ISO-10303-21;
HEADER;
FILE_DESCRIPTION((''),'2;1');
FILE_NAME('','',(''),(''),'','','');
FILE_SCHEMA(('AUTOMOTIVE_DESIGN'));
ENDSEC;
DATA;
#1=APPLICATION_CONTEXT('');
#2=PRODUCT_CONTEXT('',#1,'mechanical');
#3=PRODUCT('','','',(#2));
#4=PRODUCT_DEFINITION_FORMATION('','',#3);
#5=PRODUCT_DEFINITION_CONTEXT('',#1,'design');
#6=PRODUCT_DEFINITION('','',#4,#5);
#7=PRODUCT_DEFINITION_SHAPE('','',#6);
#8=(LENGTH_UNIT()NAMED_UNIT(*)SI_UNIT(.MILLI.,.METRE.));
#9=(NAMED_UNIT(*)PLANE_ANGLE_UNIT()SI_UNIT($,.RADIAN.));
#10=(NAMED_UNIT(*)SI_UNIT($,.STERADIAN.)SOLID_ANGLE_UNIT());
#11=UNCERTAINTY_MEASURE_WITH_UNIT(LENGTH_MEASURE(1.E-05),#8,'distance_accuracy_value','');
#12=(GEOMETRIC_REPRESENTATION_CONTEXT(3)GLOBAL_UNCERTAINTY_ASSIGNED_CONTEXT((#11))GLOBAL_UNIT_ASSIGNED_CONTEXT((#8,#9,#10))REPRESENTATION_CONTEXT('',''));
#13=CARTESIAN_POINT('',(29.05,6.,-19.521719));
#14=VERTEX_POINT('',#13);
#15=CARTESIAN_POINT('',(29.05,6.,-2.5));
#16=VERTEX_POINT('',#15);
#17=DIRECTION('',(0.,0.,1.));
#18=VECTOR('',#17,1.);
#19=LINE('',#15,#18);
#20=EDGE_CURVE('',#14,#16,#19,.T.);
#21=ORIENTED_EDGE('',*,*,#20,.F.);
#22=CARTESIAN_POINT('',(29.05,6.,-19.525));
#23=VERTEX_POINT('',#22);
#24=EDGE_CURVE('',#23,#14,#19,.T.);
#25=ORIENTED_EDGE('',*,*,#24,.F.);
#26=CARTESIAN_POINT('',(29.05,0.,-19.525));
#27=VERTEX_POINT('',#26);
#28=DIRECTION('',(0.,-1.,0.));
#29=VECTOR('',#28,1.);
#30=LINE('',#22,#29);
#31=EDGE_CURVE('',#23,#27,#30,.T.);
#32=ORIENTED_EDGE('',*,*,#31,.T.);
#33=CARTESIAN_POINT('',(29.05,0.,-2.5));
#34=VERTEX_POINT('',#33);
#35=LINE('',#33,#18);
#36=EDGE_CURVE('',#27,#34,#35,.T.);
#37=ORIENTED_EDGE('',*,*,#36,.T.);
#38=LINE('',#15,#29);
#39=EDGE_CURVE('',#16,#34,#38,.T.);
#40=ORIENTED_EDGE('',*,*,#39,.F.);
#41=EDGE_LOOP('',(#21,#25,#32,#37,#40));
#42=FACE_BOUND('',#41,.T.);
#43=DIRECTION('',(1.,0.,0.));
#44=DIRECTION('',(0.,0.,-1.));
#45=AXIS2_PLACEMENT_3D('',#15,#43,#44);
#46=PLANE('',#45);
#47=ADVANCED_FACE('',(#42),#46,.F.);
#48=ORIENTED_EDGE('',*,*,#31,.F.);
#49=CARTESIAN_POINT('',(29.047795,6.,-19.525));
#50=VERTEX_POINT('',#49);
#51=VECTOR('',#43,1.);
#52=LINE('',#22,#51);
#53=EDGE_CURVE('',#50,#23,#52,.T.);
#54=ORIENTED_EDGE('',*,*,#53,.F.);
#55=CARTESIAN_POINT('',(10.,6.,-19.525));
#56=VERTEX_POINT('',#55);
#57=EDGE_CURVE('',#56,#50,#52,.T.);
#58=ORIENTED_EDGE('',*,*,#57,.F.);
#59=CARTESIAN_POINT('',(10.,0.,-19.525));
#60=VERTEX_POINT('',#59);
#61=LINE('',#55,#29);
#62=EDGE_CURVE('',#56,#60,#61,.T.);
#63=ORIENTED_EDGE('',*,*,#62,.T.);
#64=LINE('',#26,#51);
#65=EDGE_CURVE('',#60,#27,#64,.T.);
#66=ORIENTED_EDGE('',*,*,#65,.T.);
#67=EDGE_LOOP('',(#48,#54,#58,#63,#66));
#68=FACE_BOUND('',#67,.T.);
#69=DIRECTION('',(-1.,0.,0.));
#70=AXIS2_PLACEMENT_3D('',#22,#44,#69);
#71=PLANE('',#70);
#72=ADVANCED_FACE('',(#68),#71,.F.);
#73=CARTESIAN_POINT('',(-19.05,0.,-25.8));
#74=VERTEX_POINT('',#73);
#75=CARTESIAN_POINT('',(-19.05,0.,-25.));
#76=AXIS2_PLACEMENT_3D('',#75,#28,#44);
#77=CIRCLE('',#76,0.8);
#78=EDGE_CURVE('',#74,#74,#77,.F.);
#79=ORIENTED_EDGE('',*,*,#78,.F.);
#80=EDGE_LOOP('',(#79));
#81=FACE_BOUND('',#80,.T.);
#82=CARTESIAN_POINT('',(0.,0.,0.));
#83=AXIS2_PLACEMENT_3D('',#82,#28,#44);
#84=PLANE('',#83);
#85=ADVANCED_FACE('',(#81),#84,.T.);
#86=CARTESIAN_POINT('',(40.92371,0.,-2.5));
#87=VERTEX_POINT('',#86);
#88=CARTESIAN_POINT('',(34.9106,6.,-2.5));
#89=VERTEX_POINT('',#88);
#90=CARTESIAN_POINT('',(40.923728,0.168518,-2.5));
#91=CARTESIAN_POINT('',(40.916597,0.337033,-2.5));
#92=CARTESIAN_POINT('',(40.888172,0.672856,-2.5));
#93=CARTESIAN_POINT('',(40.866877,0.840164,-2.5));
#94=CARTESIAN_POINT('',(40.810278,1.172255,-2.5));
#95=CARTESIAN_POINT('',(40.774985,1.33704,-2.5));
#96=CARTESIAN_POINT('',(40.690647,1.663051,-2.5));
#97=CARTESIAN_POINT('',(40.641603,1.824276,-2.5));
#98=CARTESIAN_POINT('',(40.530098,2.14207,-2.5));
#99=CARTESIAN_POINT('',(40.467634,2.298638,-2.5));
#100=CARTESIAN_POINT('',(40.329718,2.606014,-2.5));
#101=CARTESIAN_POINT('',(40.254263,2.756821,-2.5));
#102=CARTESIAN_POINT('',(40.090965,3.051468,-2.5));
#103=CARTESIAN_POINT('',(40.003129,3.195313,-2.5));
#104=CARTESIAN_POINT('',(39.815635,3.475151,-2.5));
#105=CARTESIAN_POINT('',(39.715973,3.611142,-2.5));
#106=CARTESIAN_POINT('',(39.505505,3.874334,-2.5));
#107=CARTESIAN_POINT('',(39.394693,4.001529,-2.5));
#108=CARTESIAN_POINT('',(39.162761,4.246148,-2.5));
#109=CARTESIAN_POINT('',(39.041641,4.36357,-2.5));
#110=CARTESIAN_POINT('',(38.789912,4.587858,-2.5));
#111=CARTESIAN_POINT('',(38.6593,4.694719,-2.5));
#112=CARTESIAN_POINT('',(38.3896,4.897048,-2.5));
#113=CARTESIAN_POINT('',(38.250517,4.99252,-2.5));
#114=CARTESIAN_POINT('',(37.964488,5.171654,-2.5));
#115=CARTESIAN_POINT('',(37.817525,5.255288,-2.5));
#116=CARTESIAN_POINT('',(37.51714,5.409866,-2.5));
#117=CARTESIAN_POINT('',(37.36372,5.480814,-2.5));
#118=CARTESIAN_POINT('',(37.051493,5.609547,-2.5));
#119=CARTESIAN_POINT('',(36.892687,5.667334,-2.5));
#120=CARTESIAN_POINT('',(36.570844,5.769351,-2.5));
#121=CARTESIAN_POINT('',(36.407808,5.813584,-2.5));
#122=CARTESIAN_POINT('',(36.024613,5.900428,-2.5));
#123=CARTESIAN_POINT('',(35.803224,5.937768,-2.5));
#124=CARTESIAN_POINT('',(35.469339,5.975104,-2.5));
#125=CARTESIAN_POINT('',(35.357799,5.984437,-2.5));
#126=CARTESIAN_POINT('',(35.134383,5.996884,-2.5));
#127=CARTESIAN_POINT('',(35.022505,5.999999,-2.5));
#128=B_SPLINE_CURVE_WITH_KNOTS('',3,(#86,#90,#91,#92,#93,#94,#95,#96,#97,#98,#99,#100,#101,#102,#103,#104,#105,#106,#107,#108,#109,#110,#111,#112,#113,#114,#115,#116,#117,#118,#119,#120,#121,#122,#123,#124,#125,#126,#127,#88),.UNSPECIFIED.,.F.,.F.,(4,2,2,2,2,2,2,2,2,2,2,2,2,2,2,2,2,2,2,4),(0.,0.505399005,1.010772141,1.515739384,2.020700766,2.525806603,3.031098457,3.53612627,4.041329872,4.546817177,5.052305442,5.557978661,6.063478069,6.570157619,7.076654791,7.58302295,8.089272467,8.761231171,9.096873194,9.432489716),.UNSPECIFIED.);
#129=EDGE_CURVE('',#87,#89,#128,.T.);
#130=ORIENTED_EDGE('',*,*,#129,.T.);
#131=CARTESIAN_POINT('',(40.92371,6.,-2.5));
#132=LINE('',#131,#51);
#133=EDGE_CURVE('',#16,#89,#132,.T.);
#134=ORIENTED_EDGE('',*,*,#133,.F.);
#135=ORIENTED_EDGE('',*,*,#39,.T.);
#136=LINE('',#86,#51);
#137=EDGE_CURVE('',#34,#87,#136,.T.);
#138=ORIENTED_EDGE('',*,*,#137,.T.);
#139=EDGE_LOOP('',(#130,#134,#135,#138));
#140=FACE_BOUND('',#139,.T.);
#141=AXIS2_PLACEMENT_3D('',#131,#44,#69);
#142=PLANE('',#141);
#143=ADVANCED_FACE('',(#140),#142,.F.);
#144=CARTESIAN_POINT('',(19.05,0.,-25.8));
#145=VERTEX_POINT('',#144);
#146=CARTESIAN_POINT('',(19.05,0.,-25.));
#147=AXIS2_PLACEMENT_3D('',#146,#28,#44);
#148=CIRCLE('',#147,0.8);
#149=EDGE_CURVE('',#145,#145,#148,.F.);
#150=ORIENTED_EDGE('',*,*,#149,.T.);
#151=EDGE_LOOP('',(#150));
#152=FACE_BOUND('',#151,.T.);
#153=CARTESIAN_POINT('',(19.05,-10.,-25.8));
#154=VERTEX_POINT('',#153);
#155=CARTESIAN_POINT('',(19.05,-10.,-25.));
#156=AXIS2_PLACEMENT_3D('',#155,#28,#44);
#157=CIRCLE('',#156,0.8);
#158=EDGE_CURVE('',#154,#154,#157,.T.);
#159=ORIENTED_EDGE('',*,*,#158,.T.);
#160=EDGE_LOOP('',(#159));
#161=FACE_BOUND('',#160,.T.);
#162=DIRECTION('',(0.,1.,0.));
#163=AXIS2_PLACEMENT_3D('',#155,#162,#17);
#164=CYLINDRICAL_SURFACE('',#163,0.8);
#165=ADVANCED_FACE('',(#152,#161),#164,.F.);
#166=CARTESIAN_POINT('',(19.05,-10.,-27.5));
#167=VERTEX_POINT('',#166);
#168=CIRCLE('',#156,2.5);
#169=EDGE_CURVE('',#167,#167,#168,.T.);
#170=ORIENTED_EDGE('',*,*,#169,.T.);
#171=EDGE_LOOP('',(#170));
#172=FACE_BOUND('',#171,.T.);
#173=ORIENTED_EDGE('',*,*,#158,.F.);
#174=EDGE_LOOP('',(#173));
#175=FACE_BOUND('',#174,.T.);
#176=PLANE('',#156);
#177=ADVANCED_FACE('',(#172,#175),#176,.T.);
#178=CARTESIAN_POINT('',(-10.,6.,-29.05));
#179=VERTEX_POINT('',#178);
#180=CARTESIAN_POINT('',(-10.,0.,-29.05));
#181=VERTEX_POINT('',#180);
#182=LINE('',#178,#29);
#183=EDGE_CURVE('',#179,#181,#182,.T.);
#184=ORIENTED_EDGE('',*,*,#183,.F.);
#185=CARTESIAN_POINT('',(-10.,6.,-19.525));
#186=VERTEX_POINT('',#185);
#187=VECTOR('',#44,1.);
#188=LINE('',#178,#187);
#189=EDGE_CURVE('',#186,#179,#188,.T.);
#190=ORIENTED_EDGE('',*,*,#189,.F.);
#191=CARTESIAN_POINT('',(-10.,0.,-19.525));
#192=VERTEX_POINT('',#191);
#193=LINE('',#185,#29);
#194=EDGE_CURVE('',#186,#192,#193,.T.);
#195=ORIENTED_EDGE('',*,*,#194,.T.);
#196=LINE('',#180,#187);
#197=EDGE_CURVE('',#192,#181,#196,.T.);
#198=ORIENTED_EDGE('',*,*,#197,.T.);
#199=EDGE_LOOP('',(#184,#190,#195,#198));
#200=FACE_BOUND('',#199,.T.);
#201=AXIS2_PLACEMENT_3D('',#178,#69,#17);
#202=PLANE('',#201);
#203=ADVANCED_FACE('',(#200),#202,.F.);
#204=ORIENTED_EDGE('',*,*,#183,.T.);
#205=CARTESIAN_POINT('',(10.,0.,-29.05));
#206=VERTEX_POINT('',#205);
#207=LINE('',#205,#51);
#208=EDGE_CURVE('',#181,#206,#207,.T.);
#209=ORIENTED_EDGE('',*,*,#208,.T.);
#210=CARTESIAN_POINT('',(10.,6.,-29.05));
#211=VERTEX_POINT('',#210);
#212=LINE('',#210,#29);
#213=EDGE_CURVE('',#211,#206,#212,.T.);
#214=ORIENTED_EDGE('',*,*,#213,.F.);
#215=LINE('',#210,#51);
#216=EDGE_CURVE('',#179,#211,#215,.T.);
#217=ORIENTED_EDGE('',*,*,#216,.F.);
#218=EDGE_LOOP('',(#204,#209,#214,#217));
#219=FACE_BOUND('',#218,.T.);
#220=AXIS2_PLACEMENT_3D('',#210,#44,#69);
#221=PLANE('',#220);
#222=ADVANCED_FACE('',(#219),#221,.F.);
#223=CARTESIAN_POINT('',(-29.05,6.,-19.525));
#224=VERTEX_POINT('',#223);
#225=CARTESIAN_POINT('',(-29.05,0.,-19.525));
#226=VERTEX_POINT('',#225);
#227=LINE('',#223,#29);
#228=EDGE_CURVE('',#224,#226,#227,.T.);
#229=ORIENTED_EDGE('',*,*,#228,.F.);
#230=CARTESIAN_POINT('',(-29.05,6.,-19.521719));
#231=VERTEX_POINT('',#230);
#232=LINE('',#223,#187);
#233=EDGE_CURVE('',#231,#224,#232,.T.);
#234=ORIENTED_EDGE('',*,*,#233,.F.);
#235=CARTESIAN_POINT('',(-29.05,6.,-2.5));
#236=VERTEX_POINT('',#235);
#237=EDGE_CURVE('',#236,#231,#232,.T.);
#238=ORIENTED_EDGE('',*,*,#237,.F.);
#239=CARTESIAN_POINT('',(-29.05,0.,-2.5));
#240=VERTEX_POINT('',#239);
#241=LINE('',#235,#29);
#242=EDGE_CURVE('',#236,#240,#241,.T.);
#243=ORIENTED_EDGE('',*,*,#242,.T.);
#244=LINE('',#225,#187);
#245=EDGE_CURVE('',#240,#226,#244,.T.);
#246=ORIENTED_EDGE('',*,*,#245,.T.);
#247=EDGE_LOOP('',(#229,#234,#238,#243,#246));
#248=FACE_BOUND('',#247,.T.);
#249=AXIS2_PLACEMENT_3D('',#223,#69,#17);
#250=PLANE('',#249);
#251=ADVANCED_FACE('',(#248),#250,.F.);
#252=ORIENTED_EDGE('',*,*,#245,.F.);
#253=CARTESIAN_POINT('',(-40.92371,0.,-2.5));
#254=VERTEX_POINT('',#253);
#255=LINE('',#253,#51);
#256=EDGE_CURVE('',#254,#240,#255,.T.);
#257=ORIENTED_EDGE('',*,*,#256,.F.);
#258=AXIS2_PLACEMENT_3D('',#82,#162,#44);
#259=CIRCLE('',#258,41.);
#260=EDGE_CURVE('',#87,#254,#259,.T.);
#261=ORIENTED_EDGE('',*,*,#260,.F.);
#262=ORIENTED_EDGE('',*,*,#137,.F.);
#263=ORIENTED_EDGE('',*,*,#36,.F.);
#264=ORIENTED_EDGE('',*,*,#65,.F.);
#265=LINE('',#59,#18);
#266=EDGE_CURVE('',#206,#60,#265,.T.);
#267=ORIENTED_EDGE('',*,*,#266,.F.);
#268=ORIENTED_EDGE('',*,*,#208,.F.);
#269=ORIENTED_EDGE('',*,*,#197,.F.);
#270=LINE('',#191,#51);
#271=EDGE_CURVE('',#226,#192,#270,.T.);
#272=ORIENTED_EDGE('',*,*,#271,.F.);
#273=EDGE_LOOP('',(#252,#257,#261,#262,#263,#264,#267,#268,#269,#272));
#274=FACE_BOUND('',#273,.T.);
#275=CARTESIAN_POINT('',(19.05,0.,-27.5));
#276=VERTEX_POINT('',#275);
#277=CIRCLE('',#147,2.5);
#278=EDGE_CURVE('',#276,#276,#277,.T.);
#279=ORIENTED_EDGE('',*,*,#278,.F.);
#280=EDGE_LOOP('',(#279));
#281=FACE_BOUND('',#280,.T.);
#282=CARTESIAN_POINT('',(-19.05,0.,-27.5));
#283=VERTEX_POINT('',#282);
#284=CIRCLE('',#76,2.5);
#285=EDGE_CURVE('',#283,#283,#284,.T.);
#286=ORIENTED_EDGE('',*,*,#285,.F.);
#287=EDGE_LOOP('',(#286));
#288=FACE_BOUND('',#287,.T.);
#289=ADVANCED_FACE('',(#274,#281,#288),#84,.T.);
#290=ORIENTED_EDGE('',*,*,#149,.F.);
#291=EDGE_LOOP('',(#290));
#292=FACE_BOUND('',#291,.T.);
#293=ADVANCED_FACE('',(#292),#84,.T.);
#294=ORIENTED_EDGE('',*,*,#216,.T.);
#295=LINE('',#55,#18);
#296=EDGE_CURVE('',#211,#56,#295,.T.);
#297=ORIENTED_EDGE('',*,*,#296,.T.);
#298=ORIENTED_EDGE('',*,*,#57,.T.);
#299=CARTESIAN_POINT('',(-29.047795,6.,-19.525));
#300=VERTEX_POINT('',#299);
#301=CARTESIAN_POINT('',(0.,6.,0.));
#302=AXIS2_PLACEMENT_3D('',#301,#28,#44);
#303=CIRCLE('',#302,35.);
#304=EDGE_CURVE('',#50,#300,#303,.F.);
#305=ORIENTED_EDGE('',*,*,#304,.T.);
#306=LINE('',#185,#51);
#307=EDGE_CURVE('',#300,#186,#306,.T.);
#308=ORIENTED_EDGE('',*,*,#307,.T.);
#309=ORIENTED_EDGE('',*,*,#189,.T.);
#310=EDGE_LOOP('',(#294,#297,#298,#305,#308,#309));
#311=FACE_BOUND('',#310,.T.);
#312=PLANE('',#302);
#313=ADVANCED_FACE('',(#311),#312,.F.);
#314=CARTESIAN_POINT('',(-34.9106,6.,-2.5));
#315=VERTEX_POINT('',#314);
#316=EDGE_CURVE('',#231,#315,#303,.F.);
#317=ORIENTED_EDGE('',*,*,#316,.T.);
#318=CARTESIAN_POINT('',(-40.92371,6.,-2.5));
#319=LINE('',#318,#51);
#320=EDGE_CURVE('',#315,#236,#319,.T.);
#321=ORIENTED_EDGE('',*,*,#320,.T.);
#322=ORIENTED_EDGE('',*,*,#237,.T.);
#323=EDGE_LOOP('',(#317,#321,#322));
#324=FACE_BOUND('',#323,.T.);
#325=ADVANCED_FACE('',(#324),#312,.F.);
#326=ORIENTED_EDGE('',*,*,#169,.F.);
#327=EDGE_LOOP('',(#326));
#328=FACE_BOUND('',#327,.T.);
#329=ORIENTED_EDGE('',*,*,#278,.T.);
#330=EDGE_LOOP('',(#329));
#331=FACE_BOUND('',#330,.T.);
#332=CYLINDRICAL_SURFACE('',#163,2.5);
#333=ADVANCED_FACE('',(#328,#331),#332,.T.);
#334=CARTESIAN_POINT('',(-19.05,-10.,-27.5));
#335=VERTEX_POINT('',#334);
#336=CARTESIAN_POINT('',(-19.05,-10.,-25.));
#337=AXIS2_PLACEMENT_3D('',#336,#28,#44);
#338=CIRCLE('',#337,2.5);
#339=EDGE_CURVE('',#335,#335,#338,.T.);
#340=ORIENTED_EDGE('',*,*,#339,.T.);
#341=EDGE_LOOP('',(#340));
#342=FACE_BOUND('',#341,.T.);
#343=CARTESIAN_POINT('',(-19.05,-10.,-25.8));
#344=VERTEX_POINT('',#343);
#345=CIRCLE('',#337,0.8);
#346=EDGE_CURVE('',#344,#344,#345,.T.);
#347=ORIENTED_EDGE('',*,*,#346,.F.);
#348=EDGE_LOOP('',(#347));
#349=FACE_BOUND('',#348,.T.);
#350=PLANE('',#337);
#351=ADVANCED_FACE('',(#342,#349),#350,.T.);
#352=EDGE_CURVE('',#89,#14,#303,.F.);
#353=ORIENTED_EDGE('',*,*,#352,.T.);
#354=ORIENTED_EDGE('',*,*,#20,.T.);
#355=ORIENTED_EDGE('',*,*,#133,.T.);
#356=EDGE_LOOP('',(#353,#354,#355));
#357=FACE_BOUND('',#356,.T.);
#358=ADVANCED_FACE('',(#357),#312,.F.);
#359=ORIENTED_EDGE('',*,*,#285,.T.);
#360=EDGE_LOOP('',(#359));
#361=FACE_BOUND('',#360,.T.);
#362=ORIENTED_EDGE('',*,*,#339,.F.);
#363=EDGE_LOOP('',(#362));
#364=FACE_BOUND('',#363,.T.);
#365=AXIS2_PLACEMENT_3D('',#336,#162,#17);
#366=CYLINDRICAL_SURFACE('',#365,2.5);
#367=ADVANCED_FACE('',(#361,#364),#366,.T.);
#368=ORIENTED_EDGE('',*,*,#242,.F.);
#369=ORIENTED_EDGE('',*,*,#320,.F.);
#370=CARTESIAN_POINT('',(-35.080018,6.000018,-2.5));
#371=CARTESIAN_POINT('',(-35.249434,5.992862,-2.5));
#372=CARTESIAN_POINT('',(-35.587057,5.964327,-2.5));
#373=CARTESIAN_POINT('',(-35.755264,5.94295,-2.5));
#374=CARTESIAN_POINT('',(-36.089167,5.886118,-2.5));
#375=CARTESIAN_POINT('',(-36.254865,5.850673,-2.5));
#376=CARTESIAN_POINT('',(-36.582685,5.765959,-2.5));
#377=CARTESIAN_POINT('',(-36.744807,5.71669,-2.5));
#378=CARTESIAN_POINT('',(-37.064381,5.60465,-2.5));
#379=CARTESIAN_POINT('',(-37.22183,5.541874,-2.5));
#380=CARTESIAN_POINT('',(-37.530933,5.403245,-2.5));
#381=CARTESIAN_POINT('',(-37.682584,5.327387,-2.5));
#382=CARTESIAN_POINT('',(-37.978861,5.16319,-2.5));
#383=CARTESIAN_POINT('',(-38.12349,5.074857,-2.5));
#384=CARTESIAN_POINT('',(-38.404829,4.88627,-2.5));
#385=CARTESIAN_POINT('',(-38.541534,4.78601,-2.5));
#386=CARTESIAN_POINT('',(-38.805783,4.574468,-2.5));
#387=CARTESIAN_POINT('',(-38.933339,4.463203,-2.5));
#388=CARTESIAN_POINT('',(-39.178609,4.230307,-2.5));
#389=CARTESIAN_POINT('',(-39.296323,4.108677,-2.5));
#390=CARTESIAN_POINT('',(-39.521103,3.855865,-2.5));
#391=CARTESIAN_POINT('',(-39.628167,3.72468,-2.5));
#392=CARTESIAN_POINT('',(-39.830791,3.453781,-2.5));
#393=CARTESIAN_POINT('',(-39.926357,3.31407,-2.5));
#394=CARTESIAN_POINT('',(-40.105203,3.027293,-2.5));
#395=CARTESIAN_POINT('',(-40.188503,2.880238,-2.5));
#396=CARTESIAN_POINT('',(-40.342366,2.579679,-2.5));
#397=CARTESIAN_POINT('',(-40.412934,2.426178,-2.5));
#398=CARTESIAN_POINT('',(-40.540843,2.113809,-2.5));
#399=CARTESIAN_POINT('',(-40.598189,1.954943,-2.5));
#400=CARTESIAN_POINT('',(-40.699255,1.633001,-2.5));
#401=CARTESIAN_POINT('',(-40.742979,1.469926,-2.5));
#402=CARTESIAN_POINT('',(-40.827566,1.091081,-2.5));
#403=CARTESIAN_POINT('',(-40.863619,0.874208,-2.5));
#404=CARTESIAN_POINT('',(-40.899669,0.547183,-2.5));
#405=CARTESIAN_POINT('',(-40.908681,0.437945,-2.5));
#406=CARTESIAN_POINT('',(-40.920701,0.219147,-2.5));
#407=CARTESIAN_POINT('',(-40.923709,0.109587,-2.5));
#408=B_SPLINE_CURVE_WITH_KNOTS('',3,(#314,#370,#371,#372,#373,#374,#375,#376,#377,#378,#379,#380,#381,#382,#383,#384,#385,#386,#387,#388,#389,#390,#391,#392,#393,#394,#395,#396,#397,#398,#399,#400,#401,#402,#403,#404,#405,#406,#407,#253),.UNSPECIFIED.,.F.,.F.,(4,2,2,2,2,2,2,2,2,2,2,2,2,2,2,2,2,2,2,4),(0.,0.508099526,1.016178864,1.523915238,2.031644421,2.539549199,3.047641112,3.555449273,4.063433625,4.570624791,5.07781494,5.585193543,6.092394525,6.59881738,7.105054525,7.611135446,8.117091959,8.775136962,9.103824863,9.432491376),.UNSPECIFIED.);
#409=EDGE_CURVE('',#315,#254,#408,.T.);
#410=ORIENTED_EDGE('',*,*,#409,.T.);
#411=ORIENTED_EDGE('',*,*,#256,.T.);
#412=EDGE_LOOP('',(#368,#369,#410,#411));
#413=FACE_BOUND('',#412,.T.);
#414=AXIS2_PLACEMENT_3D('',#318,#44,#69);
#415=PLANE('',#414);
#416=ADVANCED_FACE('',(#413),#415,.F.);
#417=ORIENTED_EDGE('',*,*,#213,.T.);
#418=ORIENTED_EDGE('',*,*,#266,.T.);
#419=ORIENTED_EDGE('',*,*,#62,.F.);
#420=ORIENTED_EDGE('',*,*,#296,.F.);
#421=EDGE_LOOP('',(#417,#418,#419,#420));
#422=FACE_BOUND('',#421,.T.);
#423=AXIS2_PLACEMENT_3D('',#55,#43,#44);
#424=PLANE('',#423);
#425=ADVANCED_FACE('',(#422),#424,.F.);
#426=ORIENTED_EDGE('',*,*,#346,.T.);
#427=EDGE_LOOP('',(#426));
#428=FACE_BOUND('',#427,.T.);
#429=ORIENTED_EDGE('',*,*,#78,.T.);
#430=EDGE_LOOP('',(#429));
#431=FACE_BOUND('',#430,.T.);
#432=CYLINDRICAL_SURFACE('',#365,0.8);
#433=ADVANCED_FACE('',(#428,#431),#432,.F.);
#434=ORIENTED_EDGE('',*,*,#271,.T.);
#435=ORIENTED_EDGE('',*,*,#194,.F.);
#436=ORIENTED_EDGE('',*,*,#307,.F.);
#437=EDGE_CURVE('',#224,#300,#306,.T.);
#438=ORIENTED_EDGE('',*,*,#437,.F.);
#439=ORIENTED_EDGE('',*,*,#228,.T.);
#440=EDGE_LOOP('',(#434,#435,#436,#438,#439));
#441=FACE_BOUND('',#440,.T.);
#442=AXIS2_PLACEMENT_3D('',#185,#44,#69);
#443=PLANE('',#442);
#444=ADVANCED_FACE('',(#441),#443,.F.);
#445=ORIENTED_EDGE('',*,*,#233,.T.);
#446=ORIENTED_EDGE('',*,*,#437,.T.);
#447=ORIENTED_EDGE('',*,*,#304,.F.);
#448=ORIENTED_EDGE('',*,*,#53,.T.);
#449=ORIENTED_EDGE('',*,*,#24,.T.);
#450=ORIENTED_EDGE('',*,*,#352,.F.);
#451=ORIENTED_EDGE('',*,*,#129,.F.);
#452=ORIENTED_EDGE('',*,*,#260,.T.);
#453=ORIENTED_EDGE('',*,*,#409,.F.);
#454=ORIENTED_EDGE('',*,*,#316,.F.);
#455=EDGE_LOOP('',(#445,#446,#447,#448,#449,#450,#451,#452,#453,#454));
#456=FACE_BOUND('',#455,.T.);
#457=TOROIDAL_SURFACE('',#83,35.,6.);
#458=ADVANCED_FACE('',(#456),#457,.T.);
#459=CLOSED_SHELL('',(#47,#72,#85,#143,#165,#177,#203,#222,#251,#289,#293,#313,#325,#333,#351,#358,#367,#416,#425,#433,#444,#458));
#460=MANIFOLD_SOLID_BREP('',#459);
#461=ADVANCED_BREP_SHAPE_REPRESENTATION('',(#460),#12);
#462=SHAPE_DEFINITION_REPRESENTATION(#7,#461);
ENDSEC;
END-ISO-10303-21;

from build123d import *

# Parameters (mm, degrees)
BOSS_EXTRUDE1_DEPTH = 6
FILLET1_R           = 6
SKETCH2_R           = 2.5
SKETCH2_R_2         = 0.8
BOSS_EXTRUDE2_DEPTH = 10


with BuildPart() as part:
    # Sketch1 → Boss-Extrude1 (new body)
    with BuildSketch(Plane(origin=(0, 0, 0), x_dir=(1, 0, 0), z_dir=(0, 1, 0))):
        with BuildLine():
            Line((-40.923709509, 2.5), (-29.05, 2.5))
            Line((-29.05, 2.5), (-29.05, 19.525))
            Line((-29.05, 19.525), (-10, 19.525))
            Line((-10, 19.525), (-10, 29.05))
            Line((-10, 29.05), (10, 29.05))
            Line((10, 29.05), (10, 19.525))
            Line((10, 19.525), (29.05, 19.525))
            Line((29.05, 19.525), (29.05, 2.5))
            Line((29.05, 2.5), (40.923709509, 2.5))
            ThreePointArc((40.923709509, 2.5), (0, 41), (-40.923709509, 2.5))
        make_face()
    extrude(amount=BOSS_EXTRUDE1_DEPTH)

    # Fillet1
    fillet1_edges = [part.edges().sort_by_distance(p)[0] for p in [
        (0, 6, -41),
    ]]
    fillet(fillet1_edges, radius=FILLET1_R - 0.0001)  # a hair under: the kernel refuses the full size

    # Sketch2 → Boss-Extrude2 (add)
    # profile 1 of 2: a face of its own
    with BuildSketch(Plane.XZ):
        with Locations(Location((19.05, -25, 0), (0, 0, 270))):
            Circle(SKETCH2_R)
        with Locations(Location((19.05, -25, 0), (0, 0, 270))):
            Circle(SKETCH2_R_2, mode=Mode.SUBTRACT)
    # profile 2 of 2: a face of its own
    with BuildSketch(Plane.XZ):
        with Locations(Location((-19.05, -25, 0), (0, 0, 270))):
            Circle(SKETCH2_R)
        with Locations(Location((-19.05, -25, 0), (0, 0, 270))):
            Circle(SKETCH2_R_2, mode=Mode.SUBTRACT)
    extrude(amount=BOSS_EXTRUDE2_DEPTH)


solid = part.part
